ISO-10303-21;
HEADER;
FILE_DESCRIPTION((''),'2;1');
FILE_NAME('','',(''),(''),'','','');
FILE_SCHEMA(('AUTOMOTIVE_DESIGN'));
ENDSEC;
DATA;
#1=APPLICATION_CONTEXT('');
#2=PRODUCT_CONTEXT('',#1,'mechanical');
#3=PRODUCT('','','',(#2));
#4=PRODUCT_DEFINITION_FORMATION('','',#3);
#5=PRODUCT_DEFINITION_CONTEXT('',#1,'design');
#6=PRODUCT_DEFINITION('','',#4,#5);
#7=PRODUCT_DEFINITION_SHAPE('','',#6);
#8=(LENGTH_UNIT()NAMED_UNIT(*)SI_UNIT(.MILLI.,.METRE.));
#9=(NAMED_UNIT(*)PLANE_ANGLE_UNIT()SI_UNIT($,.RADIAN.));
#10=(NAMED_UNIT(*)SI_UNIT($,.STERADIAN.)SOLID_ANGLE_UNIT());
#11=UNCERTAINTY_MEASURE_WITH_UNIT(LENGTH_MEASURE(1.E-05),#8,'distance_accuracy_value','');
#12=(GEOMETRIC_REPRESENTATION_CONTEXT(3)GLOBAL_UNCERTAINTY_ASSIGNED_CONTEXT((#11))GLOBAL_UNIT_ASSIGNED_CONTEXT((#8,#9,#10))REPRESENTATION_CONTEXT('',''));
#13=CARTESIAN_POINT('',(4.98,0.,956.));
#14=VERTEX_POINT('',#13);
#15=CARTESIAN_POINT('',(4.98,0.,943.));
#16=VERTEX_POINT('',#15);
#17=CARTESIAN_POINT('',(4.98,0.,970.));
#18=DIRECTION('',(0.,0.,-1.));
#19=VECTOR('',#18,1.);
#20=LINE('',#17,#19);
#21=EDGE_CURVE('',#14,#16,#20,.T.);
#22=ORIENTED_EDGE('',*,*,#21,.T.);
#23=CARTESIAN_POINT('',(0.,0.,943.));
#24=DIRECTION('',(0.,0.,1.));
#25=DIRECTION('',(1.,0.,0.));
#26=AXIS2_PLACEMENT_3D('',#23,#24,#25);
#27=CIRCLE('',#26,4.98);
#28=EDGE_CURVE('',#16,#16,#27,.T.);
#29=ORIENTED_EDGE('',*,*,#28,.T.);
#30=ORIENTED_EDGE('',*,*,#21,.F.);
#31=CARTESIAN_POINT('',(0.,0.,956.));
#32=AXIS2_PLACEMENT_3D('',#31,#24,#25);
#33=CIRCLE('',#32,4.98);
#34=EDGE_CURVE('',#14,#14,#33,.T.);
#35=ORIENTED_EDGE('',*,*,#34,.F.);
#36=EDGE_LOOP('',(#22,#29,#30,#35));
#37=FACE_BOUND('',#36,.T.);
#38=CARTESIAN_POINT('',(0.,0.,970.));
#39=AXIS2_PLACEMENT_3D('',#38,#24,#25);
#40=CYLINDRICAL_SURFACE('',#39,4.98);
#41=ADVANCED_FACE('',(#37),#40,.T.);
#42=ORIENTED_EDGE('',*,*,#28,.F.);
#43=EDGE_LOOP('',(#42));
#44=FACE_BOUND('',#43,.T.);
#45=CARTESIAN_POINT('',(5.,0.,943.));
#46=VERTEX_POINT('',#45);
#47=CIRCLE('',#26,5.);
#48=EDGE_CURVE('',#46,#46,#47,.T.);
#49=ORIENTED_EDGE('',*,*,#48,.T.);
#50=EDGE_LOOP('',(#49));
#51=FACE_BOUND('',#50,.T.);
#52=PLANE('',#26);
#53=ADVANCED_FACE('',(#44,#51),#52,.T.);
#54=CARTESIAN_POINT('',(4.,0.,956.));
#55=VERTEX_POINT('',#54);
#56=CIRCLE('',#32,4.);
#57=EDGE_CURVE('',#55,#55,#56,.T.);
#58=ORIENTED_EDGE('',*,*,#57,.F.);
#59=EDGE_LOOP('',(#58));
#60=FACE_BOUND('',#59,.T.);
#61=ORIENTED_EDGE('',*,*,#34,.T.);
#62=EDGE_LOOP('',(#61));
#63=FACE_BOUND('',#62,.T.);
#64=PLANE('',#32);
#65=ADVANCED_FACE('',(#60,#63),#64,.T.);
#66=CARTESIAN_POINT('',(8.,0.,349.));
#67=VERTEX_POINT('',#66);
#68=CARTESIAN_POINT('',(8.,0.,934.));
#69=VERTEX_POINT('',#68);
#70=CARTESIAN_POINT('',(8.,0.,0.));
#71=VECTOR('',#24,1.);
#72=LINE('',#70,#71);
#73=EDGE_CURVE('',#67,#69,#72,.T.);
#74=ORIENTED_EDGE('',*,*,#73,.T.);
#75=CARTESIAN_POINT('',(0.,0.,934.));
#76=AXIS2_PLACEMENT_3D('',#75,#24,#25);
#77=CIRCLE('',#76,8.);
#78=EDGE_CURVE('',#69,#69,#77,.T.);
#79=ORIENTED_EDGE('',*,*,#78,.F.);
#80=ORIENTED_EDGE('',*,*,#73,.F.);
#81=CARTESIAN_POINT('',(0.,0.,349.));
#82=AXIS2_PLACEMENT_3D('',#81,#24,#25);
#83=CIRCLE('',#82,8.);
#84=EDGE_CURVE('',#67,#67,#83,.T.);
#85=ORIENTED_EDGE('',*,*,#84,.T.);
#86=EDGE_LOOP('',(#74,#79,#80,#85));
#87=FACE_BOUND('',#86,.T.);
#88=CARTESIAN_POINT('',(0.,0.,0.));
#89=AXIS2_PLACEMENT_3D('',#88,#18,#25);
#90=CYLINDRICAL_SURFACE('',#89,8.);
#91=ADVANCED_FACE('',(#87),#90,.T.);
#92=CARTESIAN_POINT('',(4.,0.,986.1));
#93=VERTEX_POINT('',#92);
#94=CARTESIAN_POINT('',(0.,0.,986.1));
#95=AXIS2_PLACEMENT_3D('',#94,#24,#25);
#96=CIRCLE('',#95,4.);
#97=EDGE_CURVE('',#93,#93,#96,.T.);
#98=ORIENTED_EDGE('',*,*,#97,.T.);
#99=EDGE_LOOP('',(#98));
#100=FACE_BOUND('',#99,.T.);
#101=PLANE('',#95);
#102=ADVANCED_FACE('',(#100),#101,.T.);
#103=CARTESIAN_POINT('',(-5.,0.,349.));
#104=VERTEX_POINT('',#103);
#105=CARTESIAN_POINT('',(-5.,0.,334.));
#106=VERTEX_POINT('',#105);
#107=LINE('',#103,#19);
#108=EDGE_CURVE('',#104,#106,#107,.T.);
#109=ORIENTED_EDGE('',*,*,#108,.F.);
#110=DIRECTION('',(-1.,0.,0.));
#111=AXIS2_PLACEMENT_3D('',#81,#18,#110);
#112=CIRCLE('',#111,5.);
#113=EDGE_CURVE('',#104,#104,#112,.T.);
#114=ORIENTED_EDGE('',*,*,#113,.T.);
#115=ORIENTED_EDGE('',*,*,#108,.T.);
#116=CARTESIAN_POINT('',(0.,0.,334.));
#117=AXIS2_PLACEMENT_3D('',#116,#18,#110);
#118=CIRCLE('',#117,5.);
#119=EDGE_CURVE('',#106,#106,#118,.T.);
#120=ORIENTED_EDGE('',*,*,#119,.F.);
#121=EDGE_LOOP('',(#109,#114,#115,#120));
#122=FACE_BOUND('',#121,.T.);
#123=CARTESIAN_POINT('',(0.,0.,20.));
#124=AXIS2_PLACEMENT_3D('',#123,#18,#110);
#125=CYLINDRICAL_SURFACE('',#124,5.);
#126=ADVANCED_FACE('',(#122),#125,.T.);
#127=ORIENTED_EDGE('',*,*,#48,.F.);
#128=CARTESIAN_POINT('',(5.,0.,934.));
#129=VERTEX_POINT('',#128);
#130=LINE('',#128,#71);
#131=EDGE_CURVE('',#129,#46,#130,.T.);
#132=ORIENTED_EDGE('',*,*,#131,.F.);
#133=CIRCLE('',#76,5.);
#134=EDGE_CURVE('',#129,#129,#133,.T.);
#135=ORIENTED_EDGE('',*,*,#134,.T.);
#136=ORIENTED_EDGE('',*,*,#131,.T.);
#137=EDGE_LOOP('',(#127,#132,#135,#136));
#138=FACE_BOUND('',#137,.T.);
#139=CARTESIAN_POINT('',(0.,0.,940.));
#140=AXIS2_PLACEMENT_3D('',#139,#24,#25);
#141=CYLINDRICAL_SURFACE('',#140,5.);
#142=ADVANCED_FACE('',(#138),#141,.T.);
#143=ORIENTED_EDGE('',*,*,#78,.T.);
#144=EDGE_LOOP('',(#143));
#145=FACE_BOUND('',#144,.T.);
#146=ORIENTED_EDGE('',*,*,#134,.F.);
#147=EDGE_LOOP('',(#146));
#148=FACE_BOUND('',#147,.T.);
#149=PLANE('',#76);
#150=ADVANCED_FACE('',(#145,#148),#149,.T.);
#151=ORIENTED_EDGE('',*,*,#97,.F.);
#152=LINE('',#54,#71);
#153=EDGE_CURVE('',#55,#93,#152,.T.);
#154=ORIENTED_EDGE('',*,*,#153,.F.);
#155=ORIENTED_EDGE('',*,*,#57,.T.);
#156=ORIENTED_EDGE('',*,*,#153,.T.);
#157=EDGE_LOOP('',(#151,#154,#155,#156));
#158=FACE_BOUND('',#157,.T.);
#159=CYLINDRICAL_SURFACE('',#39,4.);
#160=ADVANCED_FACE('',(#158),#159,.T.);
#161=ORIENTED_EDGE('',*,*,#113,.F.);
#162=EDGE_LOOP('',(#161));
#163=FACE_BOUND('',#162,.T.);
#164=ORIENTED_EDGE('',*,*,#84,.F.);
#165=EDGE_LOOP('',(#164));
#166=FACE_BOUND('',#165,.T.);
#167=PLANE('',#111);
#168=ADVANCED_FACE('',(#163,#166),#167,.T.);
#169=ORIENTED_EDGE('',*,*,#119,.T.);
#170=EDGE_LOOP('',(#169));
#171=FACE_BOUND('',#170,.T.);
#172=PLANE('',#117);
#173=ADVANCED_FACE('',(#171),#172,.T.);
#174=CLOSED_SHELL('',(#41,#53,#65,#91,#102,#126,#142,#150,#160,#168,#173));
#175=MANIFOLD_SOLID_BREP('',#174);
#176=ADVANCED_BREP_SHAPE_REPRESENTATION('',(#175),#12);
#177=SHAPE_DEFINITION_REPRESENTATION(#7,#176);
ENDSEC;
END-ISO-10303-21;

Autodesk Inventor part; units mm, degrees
ref_plane "YZ Plane" through (0, 0, 0) normal (1, 0, 0) x (0, 1, 0)
ref_plane "XZ Plane" through (0, 0, 0) normal (0, 1, 0) x (-1, 0, 0)
ref_plane "XY Plane" through (0, 0, 0) normal (0, 0, 1) x (1, 0, 0)
sketch "Szkic1" plane through (0, 0, 0) normal (0, 0, 1) x (1, 0, 0)
  circle A0 centre (0, 0) radius 8
  dimension "d0" = 16
extrude "Wyciągnięcie proste2" add sketch "Szkic1" along normal blind 1000
sketch "Szkic2" plane through (0, 0, 1000) normal (0, 0, 1) x (1, 0, 0)
  circle A0 centre (0, 0) radius 4
  circle A1 centre (0, 0) radius 8 projected
  dimension "d7" = 8
extrude "Wyciągnięcie proste3" cut sketch "Szkic2" against normal blind 30
sketch "Szkic3" plane through (0, 0, 970) normal (0, 0, 1) x (1, 0, 0)
  circle A0 centre (0, 0) radius 8 projected
  circle A1 centre (0, 0) radius 5
  dimension "d10" = 10
extrude "Wyciągnięcie proste4" cut sketch "Szkic3" against normal blind 30
sketch "Szkic4" plane through (0, 0, 970) normal (0, 0, 1) x (1, 0, 0)
  circle A0 centre (0, 0) radius 5 projected
  circle A1 centre (0, 0) radius 4.98
  dimension "d13" = 9.96
extrude "Wyciągnięcie proste5" cut sketch "Szkic4" against normal blind 27
sketch "Szkic5" plane through (0, 0, 0) normal (0, 0, -1) x (-1, 0, 0)
  circle A0 centre (0, 0) radius 5
  circle A1 centre (0, 0) radius 8 projected
  dimension "d18" = 10
extrude "Wyciągnięcie proste6" cut sketch "Szkic5" against normal blind 20
thread "Gwint3" size "TR16x4" class "7e" standard "ISO Metric Trapezoidal Threads" full length
sketch "Szkic6" plane through (0, 0, 20) normal (0, 0, -1) x (-1, 0, 0)
  circle A0 centre (0, 0) radius 5 projected
  circle A1 centre (0, 0) radius 8 projected
extrude "Wyciągnięcie proste7" cut sketch "Szkic6" against normal blind 329
sketch "Szkic7" plane through (0, 0, 0) normal (0, 0, -1) x (-1, 0, 0)
  circle A0 centre (0, 0) radius 5 projected
extrude "Wyciągnięcie proste8" cut sketch "Szkic7" against normal blind 334
sketch "Szkic8" plane through (0, 0, 940) normal (0, 0, 1) x (1, 0, 0)
  circle A0 centre (0, 0) radius 5 projected
  circle A1 centre (0, 0) radius 8 projected
extrude "Wyciągnięcie proste9" cut sketch "Szkic8" against normal blind 6
sketch "Szkic9" plane through (0, 0, 970) normal (0, 0, 1) x (1, 0, 0)
  circle A0 centre (0, 0) radius 4.98 projected
  circle A1 centre (0, 0) radius 4 projected
extrude "Wyciągnięcie proste10" cut sketch "Szkic9" against normal blind 14
thread "Gwint4" size "M10x1.5" class "6g" standard "ANSI Metric M Profile" full length
sketch "Szkic10" plane through (0, 0, 1000) normal (0, 0, 1) x (1, 0, 0)
  circle A0 centre (0, 0) radius 4 projected
extrude "Wyciągnięcie proste11" cut sketch "Szkic10" against normal blind 13.9
properties part number "Śruba trapezowa 16x4 - oś X"
